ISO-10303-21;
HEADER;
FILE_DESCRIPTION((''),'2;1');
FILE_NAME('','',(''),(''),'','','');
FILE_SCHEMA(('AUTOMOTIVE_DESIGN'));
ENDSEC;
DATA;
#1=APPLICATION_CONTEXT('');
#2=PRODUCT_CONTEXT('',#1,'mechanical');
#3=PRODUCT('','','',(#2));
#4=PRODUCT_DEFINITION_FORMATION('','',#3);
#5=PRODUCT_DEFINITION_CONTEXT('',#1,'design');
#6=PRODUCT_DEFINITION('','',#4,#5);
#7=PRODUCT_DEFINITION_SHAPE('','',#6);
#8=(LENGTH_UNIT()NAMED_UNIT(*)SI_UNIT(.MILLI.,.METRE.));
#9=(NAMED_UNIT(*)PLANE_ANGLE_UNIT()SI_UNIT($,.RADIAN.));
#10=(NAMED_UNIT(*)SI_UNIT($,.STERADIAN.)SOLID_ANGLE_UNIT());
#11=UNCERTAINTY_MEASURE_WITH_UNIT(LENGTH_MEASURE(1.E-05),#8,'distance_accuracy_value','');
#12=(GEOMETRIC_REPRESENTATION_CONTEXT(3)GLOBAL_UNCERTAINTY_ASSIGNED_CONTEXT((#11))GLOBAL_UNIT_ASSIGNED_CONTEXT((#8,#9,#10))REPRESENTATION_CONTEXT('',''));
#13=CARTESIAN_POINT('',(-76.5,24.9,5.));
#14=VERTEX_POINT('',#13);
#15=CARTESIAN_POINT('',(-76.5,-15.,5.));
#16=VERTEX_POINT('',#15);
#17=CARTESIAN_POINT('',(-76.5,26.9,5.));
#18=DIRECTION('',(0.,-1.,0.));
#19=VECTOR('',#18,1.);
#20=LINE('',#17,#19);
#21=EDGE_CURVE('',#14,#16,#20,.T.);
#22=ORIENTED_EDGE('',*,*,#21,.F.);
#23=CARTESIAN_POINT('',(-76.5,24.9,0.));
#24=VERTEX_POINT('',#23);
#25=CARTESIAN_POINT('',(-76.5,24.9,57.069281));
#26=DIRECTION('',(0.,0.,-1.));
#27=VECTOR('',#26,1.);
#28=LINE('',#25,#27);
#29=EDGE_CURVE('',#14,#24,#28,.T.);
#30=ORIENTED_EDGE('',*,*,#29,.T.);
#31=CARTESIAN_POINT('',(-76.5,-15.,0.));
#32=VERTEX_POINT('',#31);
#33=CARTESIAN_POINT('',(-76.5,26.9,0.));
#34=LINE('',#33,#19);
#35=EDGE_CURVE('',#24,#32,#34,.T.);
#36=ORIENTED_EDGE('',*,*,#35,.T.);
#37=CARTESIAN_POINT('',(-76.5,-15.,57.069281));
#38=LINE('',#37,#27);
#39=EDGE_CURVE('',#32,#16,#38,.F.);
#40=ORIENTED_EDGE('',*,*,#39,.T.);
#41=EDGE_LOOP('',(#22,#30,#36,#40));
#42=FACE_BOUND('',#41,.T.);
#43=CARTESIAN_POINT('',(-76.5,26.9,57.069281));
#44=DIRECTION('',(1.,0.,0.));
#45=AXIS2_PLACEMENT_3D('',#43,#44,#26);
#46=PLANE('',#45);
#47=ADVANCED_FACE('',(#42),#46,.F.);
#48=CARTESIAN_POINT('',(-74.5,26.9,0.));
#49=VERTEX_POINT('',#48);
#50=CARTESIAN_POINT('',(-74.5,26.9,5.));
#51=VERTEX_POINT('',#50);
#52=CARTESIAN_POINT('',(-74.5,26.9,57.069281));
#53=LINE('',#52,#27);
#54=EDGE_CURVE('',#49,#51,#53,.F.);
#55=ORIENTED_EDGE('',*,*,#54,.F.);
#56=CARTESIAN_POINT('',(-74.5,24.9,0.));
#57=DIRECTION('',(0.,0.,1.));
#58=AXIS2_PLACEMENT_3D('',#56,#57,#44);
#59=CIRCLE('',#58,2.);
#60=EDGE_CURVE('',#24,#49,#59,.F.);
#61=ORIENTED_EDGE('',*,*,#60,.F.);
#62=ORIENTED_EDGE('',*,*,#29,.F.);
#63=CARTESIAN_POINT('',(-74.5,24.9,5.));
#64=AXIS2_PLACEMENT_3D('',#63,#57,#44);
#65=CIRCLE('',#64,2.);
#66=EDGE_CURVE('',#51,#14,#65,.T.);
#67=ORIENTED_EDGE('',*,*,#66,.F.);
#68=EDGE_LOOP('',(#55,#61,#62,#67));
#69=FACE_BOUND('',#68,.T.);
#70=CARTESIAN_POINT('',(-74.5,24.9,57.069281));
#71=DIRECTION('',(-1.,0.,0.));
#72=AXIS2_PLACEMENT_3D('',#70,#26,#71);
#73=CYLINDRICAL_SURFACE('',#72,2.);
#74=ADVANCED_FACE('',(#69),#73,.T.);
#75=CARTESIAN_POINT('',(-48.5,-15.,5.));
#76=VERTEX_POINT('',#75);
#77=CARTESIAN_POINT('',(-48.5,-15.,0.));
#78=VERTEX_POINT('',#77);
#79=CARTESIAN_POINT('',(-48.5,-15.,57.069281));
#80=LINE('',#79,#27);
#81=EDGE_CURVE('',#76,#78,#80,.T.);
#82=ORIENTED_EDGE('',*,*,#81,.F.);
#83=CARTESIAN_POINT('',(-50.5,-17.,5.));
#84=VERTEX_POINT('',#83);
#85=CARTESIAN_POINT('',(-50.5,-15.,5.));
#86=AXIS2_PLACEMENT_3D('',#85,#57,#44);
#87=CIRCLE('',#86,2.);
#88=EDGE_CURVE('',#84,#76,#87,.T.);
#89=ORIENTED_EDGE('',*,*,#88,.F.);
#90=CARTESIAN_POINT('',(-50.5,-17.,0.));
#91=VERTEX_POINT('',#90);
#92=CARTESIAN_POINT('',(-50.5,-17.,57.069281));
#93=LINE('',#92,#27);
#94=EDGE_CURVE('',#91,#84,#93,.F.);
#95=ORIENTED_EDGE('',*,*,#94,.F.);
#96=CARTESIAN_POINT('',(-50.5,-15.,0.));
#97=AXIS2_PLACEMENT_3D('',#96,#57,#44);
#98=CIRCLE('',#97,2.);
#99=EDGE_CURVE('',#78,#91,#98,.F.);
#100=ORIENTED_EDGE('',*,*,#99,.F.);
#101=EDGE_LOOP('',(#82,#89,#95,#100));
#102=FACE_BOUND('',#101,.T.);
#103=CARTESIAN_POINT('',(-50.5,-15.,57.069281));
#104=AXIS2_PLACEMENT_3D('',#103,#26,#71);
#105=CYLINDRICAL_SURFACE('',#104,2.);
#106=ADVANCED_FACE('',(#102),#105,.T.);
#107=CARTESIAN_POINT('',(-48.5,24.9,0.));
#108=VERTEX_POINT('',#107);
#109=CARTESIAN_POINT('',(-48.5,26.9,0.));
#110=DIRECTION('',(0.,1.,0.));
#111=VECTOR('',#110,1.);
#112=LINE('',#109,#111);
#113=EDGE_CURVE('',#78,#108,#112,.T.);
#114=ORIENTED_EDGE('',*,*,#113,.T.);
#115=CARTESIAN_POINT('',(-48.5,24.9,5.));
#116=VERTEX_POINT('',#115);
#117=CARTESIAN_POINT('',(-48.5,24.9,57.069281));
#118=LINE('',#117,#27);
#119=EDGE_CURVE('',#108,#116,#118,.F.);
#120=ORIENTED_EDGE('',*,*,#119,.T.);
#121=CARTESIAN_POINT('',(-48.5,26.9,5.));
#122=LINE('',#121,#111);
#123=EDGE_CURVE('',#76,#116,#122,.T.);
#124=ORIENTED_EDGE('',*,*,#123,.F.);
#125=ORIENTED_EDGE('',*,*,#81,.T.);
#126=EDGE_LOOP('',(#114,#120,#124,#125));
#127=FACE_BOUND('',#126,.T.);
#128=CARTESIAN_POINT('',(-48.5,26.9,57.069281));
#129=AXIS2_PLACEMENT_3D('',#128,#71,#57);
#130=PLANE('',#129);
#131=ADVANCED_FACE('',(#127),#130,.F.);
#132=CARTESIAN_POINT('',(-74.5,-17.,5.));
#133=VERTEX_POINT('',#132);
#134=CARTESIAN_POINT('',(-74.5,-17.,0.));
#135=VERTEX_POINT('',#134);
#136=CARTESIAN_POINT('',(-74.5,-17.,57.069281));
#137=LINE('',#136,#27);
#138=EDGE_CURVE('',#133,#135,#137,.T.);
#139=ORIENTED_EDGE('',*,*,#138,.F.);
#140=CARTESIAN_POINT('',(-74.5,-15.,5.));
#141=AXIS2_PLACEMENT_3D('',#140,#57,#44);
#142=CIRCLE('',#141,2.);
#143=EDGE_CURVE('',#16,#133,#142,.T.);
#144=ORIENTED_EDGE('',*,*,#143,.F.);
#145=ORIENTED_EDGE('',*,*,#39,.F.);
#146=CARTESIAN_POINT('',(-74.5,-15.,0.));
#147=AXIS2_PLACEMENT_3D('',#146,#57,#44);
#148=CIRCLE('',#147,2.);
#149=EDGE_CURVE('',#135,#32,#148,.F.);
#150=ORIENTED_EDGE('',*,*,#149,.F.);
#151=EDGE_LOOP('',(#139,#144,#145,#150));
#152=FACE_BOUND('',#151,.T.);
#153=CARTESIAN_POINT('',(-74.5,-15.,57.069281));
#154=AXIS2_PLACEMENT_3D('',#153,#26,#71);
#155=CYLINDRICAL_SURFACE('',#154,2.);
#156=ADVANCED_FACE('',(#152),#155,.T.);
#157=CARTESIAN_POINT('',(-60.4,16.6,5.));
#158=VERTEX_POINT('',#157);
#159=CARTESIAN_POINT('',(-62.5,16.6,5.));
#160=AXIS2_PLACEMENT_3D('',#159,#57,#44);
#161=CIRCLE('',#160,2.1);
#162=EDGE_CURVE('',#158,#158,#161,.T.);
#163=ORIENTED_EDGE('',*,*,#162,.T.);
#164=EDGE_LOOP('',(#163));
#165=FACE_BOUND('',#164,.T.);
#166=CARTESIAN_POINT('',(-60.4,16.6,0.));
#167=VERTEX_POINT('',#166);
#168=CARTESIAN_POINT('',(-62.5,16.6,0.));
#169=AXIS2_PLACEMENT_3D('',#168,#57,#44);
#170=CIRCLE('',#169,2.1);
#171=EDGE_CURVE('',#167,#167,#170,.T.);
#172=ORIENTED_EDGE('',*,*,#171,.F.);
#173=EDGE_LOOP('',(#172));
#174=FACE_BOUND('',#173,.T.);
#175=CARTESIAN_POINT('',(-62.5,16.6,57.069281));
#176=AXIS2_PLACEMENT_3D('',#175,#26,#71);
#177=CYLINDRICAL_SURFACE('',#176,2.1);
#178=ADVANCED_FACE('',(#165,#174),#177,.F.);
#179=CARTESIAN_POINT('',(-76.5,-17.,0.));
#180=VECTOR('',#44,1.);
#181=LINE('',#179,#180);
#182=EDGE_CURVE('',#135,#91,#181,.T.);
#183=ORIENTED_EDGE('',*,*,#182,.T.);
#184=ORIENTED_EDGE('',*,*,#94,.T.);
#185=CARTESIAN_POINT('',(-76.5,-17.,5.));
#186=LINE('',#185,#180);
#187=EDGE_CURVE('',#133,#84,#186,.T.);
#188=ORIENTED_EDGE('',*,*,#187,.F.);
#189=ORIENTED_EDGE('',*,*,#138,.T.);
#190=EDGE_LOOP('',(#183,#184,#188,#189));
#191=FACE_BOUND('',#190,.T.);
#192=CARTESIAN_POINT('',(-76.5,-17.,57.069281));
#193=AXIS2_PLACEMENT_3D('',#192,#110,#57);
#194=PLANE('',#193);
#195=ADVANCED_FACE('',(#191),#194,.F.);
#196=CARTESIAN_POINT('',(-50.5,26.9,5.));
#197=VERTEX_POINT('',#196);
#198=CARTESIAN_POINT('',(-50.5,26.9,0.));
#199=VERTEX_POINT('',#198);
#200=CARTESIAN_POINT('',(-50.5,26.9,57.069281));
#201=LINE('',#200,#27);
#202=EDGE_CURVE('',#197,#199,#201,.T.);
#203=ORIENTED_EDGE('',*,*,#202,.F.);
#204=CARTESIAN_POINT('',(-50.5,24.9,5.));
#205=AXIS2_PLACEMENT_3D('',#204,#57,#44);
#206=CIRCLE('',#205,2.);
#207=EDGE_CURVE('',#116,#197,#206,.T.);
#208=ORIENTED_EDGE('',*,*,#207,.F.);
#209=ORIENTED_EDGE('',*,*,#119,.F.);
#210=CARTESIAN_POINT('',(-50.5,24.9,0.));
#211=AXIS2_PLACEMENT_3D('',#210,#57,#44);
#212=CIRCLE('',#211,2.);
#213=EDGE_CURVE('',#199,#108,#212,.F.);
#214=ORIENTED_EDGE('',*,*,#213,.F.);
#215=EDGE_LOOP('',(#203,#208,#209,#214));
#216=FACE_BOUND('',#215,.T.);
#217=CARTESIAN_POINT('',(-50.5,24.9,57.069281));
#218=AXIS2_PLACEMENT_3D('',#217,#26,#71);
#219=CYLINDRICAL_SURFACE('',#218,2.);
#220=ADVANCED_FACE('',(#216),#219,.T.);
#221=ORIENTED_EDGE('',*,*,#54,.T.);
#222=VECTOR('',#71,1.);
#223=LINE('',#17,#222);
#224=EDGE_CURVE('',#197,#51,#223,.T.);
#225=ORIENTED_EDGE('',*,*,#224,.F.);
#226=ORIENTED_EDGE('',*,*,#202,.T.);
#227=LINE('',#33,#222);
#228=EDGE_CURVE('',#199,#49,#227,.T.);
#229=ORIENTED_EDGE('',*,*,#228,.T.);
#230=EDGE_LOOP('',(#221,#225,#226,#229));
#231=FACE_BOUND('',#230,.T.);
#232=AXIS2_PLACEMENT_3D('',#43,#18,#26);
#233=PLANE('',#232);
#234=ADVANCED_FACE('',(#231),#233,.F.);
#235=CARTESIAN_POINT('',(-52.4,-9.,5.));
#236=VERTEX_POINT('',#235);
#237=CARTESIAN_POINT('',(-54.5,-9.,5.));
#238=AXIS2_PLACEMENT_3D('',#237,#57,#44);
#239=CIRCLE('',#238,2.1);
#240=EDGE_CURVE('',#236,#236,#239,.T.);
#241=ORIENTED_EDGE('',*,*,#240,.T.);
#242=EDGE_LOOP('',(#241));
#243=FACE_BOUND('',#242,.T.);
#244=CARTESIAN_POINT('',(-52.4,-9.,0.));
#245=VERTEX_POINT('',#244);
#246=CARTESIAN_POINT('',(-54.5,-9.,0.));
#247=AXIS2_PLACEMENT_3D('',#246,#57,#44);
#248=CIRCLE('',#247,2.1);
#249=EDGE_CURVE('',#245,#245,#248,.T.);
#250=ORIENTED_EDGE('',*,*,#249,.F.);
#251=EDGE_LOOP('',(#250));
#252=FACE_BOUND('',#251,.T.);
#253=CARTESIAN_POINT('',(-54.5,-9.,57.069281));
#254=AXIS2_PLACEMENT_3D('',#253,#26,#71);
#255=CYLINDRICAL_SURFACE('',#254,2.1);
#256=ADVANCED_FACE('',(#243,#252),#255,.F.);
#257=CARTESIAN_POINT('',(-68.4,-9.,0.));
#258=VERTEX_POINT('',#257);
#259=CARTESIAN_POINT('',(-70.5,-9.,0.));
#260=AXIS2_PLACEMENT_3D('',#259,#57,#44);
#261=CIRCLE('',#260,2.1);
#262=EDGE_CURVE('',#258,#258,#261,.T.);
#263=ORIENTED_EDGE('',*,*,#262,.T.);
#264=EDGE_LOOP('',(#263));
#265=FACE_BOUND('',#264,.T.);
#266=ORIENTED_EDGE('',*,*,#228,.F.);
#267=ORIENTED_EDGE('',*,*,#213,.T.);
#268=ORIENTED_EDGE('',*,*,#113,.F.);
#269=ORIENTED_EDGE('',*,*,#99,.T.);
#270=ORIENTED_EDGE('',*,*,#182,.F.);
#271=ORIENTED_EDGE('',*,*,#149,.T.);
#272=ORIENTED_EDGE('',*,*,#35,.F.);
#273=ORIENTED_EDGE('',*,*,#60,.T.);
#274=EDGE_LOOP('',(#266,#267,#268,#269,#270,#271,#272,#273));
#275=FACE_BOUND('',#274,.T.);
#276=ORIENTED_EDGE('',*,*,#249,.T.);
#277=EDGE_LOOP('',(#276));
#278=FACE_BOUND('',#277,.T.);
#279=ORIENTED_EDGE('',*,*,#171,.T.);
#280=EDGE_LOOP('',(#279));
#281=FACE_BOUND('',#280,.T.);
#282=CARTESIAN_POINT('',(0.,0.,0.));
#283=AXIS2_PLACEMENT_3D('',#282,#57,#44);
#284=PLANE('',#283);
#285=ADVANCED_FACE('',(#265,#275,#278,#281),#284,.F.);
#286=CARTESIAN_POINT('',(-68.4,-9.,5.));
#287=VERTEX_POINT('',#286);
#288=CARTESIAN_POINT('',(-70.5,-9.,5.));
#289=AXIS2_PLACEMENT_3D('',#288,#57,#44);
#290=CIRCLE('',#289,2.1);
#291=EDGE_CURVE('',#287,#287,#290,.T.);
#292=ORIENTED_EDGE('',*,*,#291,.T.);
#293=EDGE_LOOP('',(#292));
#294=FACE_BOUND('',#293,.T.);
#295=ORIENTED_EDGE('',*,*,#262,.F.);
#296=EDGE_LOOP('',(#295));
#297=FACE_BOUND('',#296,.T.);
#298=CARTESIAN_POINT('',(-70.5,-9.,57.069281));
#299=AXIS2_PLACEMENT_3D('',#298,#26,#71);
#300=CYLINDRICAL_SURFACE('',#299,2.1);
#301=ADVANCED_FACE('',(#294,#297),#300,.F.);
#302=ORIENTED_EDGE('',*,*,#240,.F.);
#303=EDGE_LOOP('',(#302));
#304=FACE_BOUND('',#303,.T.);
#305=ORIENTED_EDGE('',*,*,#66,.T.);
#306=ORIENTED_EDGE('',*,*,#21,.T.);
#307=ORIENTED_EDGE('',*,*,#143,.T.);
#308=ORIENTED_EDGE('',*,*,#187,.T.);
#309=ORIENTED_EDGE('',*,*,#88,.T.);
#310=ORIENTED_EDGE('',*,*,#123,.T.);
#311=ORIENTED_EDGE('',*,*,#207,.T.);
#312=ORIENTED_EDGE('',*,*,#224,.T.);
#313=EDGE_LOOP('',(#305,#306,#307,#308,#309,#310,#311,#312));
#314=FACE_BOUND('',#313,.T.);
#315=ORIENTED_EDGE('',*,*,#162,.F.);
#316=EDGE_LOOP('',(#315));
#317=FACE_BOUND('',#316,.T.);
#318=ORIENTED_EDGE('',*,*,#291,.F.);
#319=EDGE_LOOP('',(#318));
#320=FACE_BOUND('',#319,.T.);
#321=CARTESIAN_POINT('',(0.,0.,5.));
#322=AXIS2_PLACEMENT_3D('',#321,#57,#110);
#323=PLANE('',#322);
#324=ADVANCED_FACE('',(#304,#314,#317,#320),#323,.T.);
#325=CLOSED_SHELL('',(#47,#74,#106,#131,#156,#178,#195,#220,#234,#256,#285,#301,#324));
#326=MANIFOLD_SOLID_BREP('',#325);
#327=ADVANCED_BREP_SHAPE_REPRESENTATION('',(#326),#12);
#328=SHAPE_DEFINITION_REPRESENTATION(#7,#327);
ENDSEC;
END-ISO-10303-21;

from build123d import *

# Parameters (mm, degrees)
BOSS_EXTRUDE1_OUTLINE_W = 28
BOSS_EXTRUDE1_OUTLINE_H = 43.9
BOSS_EXTRUDE1_OUTLINE_R = 2.1
BOSS_EXTRUDE1_DEPTH     = 5
FILLET1_R               = 2


# Read off the part's stored shape, not the designer's step: Boss-Extrude1
with BuildPart() as part:
    # Boss-Extrude1 outline → Boss-Extrude1 (new body)
    with BuildSketch(Plane.XY):
        with Locations((-62.5, 4.95)):
            Rectangle(BOSS_EXTRUDE1_OUTLINE_W, BOSS_EXTRUDE1_OUTLINE_H)
        with Locations((-70.5, -9)):
            Circle(BOSS_EXTRUDE1_OUTLINE_R, mode=Mode.SUBTRACT)
        with Locations((-54.5, -9)):
            Circle(BOSS_EXTRUDE1_OUTLINE_R, mode=Mode.SUBTRACT)
        with Locations((-62.5, 16.6)):
            Circle(BOSS_EXTRUDE1_OUTLINE_R, mode=Mode.SUBTRACT)
    extrude(amount=BOSS_EXTRUDE1_DEPTH)

    # Fillet1
    fillet1_edges = [part.edges().sort_by_distance(p)[0] for p in [
        (-76.5, 26.9, 2.5),
        (-48.5, 26.9, 2.5),
        (-48.5, -17, 2.5),
        (-76.5, -17, 2.5),
    ]]
    fillet(fillet1_edges, radius=FILLET1_R)


solid = part.part
